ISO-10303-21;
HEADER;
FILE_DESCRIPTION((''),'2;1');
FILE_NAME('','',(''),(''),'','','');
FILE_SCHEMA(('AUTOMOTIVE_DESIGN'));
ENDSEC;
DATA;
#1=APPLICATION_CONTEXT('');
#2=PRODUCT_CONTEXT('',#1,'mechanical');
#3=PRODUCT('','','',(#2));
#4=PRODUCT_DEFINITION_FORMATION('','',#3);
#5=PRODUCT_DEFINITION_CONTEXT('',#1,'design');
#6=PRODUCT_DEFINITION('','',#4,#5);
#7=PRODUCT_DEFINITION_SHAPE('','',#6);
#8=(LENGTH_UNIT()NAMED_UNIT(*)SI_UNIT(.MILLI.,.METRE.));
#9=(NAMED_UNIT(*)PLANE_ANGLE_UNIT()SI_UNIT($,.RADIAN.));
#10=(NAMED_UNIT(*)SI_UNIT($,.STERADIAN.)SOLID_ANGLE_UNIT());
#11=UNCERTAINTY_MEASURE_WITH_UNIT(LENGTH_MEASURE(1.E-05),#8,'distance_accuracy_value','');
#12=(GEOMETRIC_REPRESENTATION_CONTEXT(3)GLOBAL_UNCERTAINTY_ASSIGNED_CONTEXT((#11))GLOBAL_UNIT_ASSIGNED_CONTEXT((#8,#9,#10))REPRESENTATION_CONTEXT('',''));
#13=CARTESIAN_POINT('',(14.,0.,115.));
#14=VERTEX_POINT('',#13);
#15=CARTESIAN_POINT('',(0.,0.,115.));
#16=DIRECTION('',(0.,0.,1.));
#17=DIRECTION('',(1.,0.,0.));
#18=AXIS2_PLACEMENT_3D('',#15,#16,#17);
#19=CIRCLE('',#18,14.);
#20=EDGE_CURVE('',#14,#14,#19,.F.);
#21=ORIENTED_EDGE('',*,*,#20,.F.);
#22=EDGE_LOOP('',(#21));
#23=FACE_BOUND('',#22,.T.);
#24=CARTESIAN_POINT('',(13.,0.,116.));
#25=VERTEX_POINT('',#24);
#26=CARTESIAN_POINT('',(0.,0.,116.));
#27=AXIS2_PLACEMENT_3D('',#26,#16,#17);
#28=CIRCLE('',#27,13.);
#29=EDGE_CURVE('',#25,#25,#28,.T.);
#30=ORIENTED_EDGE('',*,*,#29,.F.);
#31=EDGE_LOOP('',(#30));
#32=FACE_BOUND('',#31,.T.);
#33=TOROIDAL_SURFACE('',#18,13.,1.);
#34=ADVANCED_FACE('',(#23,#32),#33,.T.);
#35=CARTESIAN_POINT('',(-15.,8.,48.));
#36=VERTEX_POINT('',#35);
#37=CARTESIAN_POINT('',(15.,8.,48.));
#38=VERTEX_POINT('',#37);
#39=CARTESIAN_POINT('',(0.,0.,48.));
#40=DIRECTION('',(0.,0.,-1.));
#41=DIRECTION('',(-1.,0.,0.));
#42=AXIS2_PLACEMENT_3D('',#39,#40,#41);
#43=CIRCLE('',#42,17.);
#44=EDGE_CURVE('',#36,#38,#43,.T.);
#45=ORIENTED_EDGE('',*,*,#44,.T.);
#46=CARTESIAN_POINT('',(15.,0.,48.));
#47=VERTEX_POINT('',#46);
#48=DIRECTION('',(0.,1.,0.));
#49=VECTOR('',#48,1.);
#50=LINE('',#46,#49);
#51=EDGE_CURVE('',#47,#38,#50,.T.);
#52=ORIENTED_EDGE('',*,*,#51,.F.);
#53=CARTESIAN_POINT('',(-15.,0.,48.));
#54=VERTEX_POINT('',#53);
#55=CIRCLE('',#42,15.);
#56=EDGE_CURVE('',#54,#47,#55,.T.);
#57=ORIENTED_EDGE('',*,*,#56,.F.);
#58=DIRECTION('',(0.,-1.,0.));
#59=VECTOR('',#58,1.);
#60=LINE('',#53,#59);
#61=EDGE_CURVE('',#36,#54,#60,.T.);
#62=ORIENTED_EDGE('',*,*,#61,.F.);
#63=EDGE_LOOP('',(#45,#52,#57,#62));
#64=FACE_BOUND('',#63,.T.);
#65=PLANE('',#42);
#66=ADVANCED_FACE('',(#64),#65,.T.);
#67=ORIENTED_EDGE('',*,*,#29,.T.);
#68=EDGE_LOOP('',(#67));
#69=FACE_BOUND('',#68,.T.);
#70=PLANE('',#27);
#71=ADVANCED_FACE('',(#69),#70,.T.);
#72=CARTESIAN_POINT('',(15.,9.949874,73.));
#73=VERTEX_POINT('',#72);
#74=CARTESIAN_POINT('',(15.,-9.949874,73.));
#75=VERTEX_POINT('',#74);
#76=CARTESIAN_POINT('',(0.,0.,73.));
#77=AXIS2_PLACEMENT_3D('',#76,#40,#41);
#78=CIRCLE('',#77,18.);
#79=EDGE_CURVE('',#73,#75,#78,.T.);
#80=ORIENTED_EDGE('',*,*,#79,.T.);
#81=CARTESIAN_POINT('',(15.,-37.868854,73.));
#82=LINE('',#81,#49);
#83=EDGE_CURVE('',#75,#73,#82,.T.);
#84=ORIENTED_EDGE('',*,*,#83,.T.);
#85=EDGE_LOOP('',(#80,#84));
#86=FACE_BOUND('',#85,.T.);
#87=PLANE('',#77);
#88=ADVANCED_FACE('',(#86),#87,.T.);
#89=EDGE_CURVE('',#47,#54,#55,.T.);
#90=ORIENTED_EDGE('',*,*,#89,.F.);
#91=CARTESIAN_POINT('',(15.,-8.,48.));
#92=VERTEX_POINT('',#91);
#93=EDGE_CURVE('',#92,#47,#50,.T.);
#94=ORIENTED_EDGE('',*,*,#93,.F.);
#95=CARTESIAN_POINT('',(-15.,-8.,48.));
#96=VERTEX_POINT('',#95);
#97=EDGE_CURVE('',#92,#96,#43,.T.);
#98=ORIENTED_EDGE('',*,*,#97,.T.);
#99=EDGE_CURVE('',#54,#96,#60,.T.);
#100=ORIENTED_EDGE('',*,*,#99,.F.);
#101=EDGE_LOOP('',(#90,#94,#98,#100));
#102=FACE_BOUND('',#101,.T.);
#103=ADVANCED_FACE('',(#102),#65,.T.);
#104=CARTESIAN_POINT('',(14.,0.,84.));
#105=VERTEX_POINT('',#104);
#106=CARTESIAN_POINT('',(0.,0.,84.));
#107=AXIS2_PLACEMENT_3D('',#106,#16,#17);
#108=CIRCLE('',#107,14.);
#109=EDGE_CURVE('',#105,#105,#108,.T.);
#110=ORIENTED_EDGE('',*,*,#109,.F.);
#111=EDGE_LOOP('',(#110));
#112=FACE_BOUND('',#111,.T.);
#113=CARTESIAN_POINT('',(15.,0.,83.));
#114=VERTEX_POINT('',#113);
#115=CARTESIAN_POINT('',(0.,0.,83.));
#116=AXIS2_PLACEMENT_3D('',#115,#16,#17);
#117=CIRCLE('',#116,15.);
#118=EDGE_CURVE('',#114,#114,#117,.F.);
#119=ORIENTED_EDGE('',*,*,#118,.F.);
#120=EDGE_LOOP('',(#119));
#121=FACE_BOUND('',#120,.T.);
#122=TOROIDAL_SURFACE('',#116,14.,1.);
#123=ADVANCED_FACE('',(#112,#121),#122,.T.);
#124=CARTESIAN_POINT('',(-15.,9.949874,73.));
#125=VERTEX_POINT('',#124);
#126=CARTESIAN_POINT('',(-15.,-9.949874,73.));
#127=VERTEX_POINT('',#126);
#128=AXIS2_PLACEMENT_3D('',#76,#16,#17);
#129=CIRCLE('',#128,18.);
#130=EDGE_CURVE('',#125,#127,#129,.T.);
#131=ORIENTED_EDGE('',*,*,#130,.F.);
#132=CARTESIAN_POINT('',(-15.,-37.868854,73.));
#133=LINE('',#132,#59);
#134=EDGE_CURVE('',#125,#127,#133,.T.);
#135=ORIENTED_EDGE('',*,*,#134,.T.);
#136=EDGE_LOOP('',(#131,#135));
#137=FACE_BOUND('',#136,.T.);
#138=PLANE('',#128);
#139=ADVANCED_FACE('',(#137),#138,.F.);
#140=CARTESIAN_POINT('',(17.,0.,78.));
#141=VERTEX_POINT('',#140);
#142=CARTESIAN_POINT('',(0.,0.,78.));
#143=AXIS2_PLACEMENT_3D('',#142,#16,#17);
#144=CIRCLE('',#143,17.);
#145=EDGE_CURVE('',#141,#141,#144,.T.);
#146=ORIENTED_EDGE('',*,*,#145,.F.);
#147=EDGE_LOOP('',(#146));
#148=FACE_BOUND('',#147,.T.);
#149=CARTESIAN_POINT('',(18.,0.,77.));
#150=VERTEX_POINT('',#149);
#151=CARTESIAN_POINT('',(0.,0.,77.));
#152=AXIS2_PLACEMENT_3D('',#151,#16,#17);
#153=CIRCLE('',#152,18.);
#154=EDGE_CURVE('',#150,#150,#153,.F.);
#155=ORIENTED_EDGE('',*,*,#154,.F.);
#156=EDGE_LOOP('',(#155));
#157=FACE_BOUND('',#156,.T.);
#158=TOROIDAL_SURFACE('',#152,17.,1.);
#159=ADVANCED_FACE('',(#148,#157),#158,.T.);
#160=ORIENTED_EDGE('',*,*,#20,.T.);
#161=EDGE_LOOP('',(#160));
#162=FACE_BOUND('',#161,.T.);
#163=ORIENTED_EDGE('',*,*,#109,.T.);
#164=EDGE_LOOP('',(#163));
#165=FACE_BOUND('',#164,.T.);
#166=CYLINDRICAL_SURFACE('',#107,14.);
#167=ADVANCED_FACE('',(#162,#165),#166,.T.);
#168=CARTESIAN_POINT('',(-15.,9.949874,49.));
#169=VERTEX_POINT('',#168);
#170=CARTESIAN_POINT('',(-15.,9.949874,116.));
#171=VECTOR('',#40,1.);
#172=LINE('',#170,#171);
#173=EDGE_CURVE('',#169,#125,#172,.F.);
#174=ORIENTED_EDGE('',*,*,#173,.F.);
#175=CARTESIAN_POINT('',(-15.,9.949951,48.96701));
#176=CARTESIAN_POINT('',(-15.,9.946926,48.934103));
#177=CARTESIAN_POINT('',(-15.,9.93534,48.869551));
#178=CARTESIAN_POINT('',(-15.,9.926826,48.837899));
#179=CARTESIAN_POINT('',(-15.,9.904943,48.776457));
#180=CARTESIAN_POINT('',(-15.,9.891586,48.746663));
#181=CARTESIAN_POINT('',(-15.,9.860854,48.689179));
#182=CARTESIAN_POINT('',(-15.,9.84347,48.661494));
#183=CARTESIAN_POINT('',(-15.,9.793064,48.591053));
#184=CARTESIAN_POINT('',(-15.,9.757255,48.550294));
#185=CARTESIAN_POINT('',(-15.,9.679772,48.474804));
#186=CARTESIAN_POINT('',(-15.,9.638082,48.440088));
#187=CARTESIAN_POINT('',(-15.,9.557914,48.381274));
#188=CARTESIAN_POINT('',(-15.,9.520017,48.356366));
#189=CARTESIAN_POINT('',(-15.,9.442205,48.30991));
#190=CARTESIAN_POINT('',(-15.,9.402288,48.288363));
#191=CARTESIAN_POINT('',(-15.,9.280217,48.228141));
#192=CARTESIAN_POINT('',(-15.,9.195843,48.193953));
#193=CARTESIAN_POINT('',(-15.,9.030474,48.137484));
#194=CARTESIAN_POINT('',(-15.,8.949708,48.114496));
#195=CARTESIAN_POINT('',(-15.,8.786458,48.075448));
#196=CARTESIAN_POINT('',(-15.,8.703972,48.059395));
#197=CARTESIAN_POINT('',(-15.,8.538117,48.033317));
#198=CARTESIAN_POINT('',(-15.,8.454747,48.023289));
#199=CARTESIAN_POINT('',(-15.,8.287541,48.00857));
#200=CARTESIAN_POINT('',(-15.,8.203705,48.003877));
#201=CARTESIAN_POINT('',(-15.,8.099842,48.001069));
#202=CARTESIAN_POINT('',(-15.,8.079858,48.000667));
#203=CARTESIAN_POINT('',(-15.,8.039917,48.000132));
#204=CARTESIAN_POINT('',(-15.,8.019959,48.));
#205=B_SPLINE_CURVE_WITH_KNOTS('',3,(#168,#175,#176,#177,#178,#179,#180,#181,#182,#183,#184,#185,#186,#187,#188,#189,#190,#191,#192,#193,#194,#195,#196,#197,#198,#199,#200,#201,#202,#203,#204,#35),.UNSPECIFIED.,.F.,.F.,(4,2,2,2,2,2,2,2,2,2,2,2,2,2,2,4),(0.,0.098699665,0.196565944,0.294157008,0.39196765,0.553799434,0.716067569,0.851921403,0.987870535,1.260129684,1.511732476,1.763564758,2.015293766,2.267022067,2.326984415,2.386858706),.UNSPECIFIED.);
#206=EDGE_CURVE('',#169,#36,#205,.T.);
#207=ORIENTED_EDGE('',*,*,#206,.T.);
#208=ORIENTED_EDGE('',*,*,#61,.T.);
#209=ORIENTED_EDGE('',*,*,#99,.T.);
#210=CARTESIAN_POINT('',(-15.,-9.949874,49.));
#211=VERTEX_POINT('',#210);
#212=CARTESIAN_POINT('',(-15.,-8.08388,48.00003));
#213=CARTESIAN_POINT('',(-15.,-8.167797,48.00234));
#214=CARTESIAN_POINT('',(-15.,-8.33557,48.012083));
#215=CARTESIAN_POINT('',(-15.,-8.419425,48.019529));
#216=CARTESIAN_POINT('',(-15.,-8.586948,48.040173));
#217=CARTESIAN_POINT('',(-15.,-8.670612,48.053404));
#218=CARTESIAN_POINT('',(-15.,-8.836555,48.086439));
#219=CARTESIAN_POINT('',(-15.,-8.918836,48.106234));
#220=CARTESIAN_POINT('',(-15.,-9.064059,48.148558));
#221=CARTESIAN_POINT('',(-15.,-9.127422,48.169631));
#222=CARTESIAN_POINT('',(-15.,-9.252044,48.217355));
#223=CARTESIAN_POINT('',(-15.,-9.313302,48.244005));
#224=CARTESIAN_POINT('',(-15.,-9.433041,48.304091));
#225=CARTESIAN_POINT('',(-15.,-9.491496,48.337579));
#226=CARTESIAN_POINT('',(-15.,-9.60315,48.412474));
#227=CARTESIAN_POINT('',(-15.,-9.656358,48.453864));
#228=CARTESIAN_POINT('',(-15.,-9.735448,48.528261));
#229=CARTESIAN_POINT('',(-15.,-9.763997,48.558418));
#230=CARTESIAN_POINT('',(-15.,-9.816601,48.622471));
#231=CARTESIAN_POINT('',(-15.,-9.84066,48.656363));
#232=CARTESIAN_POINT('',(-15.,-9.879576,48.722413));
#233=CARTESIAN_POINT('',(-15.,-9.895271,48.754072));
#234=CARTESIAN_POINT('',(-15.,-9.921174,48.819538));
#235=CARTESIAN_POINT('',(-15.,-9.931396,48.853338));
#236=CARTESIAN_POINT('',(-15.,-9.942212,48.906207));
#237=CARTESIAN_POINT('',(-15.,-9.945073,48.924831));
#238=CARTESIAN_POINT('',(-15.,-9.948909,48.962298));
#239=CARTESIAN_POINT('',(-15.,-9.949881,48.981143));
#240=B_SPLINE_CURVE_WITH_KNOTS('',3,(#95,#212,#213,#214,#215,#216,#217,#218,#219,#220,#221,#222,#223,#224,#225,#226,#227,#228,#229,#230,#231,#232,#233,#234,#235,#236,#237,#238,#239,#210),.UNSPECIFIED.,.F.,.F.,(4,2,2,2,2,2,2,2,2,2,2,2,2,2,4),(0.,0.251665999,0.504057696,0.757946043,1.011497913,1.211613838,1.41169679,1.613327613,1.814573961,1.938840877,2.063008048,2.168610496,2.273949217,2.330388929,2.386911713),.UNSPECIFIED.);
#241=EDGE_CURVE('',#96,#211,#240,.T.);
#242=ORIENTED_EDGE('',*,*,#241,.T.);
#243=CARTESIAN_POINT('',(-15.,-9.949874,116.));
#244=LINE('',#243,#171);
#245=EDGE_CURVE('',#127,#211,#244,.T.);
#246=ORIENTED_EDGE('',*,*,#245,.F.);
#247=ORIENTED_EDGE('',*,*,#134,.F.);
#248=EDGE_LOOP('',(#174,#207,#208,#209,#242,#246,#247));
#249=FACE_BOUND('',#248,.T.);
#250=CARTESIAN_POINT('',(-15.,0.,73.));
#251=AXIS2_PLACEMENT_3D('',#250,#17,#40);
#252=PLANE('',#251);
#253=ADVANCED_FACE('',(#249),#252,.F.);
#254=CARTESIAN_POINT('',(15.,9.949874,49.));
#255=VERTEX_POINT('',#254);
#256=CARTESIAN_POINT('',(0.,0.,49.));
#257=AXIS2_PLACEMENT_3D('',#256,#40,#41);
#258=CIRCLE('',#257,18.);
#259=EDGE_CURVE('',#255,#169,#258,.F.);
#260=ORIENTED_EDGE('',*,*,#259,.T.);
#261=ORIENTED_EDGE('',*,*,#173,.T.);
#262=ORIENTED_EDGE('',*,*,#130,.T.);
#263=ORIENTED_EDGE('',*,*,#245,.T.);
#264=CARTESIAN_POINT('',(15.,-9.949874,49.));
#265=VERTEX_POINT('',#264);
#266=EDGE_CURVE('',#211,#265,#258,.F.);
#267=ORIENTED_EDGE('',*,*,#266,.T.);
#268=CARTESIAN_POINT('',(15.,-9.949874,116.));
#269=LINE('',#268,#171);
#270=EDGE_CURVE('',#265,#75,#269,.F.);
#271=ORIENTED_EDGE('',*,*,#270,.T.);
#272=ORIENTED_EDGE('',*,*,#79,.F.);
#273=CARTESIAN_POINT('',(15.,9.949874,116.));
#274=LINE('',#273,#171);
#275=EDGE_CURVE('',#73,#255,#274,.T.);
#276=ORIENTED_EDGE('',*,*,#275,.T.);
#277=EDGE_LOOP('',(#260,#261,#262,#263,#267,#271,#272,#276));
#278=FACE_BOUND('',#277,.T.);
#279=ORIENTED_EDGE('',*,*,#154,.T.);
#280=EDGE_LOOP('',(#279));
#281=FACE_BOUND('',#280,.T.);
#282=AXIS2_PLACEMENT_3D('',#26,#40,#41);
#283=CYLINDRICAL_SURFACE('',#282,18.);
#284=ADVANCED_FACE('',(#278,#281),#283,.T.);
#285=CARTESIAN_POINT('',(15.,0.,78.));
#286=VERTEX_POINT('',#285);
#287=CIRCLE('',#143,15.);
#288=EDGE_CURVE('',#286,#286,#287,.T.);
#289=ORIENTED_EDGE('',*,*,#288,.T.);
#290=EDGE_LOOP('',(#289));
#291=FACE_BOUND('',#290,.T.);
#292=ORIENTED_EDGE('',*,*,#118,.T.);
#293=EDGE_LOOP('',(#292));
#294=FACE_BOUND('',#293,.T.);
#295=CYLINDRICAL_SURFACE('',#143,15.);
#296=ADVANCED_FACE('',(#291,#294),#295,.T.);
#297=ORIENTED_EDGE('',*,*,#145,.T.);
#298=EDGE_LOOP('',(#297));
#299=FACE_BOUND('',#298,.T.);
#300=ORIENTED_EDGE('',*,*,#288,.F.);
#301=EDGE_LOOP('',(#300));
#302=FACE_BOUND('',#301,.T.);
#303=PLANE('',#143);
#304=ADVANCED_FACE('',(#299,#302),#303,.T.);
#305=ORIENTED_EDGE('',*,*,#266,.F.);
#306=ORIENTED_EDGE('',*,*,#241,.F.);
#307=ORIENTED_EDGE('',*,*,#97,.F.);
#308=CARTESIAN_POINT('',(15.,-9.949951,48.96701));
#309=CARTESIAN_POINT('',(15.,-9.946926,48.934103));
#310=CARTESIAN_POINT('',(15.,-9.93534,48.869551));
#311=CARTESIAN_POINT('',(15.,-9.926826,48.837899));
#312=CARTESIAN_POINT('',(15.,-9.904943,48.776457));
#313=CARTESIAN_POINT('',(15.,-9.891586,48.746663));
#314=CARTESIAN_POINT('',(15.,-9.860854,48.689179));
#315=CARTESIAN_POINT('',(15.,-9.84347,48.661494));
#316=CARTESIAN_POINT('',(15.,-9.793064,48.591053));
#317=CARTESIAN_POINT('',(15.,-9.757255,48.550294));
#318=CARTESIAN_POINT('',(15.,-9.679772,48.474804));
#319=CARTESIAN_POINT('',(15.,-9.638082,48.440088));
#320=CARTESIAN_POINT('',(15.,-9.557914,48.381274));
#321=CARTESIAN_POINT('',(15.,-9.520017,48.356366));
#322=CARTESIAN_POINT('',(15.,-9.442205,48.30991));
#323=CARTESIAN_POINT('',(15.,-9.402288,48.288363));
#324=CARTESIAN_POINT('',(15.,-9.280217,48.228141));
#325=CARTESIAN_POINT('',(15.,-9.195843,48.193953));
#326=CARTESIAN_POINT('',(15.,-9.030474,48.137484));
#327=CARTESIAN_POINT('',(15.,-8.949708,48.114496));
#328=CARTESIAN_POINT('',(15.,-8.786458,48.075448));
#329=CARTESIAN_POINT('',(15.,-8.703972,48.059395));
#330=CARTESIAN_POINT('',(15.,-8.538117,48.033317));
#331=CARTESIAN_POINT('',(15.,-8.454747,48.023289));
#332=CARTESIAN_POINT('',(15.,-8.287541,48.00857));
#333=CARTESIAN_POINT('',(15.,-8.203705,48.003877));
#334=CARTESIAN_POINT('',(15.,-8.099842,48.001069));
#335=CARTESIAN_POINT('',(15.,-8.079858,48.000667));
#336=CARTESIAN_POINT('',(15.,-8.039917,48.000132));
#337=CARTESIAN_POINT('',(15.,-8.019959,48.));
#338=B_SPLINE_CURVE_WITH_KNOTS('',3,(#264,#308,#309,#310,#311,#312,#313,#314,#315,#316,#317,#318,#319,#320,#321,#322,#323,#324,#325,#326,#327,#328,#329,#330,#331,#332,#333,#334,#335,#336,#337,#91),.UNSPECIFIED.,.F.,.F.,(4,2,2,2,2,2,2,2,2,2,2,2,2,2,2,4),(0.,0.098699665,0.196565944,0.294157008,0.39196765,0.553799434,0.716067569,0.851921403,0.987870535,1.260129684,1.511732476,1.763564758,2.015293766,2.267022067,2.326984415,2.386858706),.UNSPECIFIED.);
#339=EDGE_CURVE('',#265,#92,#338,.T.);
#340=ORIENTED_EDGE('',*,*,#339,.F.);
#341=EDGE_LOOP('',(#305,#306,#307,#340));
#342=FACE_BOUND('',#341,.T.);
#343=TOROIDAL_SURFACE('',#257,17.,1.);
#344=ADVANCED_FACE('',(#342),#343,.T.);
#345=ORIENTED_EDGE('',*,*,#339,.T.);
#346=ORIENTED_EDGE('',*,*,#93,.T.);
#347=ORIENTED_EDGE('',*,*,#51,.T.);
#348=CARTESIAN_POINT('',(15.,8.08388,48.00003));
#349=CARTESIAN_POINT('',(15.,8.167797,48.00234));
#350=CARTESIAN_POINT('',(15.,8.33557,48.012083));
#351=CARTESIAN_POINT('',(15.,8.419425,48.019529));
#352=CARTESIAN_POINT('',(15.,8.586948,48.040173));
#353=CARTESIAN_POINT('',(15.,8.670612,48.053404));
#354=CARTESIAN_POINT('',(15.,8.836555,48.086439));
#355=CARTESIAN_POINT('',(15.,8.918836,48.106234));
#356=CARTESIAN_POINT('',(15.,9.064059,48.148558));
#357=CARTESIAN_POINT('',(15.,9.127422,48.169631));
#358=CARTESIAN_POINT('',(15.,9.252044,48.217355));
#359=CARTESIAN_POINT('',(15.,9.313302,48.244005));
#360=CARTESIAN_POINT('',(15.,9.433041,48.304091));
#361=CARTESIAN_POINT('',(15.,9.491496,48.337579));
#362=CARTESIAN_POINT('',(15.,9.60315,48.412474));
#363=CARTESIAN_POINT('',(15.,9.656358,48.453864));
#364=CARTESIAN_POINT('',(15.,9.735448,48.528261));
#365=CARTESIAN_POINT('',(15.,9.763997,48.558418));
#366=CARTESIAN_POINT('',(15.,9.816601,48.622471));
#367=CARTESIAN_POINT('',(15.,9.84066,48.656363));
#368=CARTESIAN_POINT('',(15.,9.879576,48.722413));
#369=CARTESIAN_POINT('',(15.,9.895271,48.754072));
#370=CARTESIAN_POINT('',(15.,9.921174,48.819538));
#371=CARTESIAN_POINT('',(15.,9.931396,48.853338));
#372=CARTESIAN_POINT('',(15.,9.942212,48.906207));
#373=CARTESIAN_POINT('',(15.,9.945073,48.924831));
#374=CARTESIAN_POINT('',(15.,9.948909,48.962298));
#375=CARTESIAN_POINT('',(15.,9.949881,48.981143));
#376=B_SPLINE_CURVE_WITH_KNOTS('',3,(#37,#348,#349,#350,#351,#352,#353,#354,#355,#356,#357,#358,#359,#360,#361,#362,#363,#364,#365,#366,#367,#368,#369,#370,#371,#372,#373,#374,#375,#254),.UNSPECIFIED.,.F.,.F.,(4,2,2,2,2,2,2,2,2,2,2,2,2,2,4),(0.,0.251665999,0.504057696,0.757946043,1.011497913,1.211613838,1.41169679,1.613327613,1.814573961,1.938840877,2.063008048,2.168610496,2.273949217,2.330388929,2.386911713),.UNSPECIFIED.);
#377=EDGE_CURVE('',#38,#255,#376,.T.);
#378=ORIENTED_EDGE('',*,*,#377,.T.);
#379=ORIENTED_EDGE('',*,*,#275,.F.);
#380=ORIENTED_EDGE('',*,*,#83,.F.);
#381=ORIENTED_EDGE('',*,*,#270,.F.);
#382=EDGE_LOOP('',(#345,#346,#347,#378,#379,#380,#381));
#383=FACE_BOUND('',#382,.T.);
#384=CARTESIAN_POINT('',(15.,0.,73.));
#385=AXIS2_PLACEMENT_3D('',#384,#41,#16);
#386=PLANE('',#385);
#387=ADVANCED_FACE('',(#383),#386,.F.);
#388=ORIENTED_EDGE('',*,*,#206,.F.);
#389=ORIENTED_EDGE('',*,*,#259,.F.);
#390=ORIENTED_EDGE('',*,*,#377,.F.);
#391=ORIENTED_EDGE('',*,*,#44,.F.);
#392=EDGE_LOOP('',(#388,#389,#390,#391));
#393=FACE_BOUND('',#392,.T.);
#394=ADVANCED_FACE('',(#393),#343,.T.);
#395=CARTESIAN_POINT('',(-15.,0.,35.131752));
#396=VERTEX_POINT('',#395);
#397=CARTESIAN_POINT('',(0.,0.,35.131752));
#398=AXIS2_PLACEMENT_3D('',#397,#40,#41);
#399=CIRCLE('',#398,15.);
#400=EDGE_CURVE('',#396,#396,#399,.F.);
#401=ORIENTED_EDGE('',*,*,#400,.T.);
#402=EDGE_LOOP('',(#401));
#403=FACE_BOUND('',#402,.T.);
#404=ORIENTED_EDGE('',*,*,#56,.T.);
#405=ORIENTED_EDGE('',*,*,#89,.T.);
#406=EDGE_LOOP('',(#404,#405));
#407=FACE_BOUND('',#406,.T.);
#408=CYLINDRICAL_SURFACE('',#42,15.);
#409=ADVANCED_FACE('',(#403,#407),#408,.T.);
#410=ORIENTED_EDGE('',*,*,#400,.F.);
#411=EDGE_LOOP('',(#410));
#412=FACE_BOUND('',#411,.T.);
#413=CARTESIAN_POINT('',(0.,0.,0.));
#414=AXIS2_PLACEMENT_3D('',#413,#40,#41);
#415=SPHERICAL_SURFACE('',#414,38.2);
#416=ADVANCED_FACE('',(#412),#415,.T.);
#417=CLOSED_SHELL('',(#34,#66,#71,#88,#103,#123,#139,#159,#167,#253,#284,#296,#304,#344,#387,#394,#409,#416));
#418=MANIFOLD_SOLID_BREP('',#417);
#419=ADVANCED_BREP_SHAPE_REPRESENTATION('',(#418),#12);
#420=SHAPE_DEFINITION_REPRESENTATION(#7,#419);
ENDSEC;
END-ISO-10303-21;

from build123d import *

# Parameters (mm, degrees)
SKETCH_1_R          = 18
EXTRUDE_1_DEPTH     = 116
CUT_EXTRUDE_START   = -38
SKETCH_2_R          = 18
SKETCH_2_R_2        = 15
CUT_EXTRUDE_1_DEPTH = 38
CUT_EXTRUDE_START_2 = -32
SKETCH_3_R          = 15
SKETCH_3_R_2        = 14
CUT_EXTRUDE_2_DEPTH = 32
SKETCH_4_R          = 18
SKETCH_4_R_2        = 15
CUT_EXTRUDE_3_DEPTH = 48
CUT_EXTRUDE_4_DEPTH = 25
FILLET_1_R          = 1
FILLET_2_R          = 1


with BuildPart() as part:
    # 草图1 → 凸台-拉伸1 (new body)
    with BuildSketch(Plane.XY):
        with Locations(Location((0, 0, 0), (0, 0, 180))):
            Circle(SKETCH_1_R)
    extrude(amount=EXTRUDE_1_DEPTH)

    # 草图2 → 切除-拉伸1 (cut)
    with BuildSketch(Plane.XY.offset(116).offset(CUT_EXTRUDE_START)):
        with Locations(Location((0, 0, 0), (0, 0, 180))):
            Circle(SKETCH_2_R)
        Circle(SKETCH_2_R_2, mode=Mode.SUBTRACT)
    extrude(amount=CUT_EXTRUDE_1_DEPTH, mode=Mode.SUBTRACT)

    # 草图3 → 切除-拉伸2 (cut)
    with BuildSketch(Plane.XY.offset(116).offset(CUT_EXTRUDE_START_2)):
        Circle(SKETCH_3_R)
        Circle(SKETCH_3_R_2, mode=Mode.SUBTRACT)
    extrude(amount=CUT_EXTRUDE_2_DEPTH, mode=Mode.SUBTRACT)

    # 草图4 → 切除-拉伸3 (cut)
    with BuildSketch(Plane(origin=(0, 0, 0), x_dir=(-1, 0, 0), z_dir=(0, 0, -1))):
        Circle(SKETCH_4_R)
        with Locations(Location((0, 0, 0), (0, 0, 180))):
            Circle(SKETCH_4_R_2, mode=Mode.SUBTRACT)
    extrude(amount=-CUT_EXTRUDE_3_DEPTH, mode=Mode.SUBTRACT)

    # 草图5 → 旋转2 (revolve)
    with BuildSketch(Plane(origin=(0, 0, 0), x_dir=(-1, 0, 0), z_dir=(0, 0, -1))):
        with BuildLine():
            Line((0, 28), (0, -28))
            Line((0, -28), (0, -38.2))
            ThreePointArc((0, -38.2), (38.2, 0), (0, 38.2))
            Line((0, 38.2), (0, 28))
        make_face()
    revolve(axis=Axis((0, 28, 0), (0, -1, 0)))

    # 草图6 → 切除-拉伸4 (cut)
    with BuildSketch(Plane(origin=(0, 0, 48), x_dir=(-1, 0, 0), z_dir=(0, 0, -1))):
        Polygon((15, 0), (15, 35.868856724), (38.265827157, 35.868856724), (38.265827157, -37.868854143), (15, -37.868854143), align=None)
        Polygon((-15, -37.868854143), (-15, 0), (-15, 35.868856724), (-38.265827157, 35.868856724), (-38.265827157, -37.868854143), align=None)
    extrude(amount=-CUT_EXTRUDE_4_DEPTH, mode=Mode.SUBTRACT)

    # 圆角1
    fillet_1_edges = [part.edges().sort_by_distance(p)[0] for p in [
        (-15, 0, 84),
        (-14, 0, 116),
        (0, 18, 48),
        (18, 0, 78),
    ]]
    fillet(fillet_1_edges, radius=FILLET_1_R - 0.0001)  # a hair under: the kernel refuses the full size

    # 圆角2
    fillet_2_edges = [part.edges().sort_by_distance(p)[0] for p in [
        (0, -18, 48),
    ]]
    fillet(fillet_2_edges, radius=FILLET_2_R)


solid = part.part
